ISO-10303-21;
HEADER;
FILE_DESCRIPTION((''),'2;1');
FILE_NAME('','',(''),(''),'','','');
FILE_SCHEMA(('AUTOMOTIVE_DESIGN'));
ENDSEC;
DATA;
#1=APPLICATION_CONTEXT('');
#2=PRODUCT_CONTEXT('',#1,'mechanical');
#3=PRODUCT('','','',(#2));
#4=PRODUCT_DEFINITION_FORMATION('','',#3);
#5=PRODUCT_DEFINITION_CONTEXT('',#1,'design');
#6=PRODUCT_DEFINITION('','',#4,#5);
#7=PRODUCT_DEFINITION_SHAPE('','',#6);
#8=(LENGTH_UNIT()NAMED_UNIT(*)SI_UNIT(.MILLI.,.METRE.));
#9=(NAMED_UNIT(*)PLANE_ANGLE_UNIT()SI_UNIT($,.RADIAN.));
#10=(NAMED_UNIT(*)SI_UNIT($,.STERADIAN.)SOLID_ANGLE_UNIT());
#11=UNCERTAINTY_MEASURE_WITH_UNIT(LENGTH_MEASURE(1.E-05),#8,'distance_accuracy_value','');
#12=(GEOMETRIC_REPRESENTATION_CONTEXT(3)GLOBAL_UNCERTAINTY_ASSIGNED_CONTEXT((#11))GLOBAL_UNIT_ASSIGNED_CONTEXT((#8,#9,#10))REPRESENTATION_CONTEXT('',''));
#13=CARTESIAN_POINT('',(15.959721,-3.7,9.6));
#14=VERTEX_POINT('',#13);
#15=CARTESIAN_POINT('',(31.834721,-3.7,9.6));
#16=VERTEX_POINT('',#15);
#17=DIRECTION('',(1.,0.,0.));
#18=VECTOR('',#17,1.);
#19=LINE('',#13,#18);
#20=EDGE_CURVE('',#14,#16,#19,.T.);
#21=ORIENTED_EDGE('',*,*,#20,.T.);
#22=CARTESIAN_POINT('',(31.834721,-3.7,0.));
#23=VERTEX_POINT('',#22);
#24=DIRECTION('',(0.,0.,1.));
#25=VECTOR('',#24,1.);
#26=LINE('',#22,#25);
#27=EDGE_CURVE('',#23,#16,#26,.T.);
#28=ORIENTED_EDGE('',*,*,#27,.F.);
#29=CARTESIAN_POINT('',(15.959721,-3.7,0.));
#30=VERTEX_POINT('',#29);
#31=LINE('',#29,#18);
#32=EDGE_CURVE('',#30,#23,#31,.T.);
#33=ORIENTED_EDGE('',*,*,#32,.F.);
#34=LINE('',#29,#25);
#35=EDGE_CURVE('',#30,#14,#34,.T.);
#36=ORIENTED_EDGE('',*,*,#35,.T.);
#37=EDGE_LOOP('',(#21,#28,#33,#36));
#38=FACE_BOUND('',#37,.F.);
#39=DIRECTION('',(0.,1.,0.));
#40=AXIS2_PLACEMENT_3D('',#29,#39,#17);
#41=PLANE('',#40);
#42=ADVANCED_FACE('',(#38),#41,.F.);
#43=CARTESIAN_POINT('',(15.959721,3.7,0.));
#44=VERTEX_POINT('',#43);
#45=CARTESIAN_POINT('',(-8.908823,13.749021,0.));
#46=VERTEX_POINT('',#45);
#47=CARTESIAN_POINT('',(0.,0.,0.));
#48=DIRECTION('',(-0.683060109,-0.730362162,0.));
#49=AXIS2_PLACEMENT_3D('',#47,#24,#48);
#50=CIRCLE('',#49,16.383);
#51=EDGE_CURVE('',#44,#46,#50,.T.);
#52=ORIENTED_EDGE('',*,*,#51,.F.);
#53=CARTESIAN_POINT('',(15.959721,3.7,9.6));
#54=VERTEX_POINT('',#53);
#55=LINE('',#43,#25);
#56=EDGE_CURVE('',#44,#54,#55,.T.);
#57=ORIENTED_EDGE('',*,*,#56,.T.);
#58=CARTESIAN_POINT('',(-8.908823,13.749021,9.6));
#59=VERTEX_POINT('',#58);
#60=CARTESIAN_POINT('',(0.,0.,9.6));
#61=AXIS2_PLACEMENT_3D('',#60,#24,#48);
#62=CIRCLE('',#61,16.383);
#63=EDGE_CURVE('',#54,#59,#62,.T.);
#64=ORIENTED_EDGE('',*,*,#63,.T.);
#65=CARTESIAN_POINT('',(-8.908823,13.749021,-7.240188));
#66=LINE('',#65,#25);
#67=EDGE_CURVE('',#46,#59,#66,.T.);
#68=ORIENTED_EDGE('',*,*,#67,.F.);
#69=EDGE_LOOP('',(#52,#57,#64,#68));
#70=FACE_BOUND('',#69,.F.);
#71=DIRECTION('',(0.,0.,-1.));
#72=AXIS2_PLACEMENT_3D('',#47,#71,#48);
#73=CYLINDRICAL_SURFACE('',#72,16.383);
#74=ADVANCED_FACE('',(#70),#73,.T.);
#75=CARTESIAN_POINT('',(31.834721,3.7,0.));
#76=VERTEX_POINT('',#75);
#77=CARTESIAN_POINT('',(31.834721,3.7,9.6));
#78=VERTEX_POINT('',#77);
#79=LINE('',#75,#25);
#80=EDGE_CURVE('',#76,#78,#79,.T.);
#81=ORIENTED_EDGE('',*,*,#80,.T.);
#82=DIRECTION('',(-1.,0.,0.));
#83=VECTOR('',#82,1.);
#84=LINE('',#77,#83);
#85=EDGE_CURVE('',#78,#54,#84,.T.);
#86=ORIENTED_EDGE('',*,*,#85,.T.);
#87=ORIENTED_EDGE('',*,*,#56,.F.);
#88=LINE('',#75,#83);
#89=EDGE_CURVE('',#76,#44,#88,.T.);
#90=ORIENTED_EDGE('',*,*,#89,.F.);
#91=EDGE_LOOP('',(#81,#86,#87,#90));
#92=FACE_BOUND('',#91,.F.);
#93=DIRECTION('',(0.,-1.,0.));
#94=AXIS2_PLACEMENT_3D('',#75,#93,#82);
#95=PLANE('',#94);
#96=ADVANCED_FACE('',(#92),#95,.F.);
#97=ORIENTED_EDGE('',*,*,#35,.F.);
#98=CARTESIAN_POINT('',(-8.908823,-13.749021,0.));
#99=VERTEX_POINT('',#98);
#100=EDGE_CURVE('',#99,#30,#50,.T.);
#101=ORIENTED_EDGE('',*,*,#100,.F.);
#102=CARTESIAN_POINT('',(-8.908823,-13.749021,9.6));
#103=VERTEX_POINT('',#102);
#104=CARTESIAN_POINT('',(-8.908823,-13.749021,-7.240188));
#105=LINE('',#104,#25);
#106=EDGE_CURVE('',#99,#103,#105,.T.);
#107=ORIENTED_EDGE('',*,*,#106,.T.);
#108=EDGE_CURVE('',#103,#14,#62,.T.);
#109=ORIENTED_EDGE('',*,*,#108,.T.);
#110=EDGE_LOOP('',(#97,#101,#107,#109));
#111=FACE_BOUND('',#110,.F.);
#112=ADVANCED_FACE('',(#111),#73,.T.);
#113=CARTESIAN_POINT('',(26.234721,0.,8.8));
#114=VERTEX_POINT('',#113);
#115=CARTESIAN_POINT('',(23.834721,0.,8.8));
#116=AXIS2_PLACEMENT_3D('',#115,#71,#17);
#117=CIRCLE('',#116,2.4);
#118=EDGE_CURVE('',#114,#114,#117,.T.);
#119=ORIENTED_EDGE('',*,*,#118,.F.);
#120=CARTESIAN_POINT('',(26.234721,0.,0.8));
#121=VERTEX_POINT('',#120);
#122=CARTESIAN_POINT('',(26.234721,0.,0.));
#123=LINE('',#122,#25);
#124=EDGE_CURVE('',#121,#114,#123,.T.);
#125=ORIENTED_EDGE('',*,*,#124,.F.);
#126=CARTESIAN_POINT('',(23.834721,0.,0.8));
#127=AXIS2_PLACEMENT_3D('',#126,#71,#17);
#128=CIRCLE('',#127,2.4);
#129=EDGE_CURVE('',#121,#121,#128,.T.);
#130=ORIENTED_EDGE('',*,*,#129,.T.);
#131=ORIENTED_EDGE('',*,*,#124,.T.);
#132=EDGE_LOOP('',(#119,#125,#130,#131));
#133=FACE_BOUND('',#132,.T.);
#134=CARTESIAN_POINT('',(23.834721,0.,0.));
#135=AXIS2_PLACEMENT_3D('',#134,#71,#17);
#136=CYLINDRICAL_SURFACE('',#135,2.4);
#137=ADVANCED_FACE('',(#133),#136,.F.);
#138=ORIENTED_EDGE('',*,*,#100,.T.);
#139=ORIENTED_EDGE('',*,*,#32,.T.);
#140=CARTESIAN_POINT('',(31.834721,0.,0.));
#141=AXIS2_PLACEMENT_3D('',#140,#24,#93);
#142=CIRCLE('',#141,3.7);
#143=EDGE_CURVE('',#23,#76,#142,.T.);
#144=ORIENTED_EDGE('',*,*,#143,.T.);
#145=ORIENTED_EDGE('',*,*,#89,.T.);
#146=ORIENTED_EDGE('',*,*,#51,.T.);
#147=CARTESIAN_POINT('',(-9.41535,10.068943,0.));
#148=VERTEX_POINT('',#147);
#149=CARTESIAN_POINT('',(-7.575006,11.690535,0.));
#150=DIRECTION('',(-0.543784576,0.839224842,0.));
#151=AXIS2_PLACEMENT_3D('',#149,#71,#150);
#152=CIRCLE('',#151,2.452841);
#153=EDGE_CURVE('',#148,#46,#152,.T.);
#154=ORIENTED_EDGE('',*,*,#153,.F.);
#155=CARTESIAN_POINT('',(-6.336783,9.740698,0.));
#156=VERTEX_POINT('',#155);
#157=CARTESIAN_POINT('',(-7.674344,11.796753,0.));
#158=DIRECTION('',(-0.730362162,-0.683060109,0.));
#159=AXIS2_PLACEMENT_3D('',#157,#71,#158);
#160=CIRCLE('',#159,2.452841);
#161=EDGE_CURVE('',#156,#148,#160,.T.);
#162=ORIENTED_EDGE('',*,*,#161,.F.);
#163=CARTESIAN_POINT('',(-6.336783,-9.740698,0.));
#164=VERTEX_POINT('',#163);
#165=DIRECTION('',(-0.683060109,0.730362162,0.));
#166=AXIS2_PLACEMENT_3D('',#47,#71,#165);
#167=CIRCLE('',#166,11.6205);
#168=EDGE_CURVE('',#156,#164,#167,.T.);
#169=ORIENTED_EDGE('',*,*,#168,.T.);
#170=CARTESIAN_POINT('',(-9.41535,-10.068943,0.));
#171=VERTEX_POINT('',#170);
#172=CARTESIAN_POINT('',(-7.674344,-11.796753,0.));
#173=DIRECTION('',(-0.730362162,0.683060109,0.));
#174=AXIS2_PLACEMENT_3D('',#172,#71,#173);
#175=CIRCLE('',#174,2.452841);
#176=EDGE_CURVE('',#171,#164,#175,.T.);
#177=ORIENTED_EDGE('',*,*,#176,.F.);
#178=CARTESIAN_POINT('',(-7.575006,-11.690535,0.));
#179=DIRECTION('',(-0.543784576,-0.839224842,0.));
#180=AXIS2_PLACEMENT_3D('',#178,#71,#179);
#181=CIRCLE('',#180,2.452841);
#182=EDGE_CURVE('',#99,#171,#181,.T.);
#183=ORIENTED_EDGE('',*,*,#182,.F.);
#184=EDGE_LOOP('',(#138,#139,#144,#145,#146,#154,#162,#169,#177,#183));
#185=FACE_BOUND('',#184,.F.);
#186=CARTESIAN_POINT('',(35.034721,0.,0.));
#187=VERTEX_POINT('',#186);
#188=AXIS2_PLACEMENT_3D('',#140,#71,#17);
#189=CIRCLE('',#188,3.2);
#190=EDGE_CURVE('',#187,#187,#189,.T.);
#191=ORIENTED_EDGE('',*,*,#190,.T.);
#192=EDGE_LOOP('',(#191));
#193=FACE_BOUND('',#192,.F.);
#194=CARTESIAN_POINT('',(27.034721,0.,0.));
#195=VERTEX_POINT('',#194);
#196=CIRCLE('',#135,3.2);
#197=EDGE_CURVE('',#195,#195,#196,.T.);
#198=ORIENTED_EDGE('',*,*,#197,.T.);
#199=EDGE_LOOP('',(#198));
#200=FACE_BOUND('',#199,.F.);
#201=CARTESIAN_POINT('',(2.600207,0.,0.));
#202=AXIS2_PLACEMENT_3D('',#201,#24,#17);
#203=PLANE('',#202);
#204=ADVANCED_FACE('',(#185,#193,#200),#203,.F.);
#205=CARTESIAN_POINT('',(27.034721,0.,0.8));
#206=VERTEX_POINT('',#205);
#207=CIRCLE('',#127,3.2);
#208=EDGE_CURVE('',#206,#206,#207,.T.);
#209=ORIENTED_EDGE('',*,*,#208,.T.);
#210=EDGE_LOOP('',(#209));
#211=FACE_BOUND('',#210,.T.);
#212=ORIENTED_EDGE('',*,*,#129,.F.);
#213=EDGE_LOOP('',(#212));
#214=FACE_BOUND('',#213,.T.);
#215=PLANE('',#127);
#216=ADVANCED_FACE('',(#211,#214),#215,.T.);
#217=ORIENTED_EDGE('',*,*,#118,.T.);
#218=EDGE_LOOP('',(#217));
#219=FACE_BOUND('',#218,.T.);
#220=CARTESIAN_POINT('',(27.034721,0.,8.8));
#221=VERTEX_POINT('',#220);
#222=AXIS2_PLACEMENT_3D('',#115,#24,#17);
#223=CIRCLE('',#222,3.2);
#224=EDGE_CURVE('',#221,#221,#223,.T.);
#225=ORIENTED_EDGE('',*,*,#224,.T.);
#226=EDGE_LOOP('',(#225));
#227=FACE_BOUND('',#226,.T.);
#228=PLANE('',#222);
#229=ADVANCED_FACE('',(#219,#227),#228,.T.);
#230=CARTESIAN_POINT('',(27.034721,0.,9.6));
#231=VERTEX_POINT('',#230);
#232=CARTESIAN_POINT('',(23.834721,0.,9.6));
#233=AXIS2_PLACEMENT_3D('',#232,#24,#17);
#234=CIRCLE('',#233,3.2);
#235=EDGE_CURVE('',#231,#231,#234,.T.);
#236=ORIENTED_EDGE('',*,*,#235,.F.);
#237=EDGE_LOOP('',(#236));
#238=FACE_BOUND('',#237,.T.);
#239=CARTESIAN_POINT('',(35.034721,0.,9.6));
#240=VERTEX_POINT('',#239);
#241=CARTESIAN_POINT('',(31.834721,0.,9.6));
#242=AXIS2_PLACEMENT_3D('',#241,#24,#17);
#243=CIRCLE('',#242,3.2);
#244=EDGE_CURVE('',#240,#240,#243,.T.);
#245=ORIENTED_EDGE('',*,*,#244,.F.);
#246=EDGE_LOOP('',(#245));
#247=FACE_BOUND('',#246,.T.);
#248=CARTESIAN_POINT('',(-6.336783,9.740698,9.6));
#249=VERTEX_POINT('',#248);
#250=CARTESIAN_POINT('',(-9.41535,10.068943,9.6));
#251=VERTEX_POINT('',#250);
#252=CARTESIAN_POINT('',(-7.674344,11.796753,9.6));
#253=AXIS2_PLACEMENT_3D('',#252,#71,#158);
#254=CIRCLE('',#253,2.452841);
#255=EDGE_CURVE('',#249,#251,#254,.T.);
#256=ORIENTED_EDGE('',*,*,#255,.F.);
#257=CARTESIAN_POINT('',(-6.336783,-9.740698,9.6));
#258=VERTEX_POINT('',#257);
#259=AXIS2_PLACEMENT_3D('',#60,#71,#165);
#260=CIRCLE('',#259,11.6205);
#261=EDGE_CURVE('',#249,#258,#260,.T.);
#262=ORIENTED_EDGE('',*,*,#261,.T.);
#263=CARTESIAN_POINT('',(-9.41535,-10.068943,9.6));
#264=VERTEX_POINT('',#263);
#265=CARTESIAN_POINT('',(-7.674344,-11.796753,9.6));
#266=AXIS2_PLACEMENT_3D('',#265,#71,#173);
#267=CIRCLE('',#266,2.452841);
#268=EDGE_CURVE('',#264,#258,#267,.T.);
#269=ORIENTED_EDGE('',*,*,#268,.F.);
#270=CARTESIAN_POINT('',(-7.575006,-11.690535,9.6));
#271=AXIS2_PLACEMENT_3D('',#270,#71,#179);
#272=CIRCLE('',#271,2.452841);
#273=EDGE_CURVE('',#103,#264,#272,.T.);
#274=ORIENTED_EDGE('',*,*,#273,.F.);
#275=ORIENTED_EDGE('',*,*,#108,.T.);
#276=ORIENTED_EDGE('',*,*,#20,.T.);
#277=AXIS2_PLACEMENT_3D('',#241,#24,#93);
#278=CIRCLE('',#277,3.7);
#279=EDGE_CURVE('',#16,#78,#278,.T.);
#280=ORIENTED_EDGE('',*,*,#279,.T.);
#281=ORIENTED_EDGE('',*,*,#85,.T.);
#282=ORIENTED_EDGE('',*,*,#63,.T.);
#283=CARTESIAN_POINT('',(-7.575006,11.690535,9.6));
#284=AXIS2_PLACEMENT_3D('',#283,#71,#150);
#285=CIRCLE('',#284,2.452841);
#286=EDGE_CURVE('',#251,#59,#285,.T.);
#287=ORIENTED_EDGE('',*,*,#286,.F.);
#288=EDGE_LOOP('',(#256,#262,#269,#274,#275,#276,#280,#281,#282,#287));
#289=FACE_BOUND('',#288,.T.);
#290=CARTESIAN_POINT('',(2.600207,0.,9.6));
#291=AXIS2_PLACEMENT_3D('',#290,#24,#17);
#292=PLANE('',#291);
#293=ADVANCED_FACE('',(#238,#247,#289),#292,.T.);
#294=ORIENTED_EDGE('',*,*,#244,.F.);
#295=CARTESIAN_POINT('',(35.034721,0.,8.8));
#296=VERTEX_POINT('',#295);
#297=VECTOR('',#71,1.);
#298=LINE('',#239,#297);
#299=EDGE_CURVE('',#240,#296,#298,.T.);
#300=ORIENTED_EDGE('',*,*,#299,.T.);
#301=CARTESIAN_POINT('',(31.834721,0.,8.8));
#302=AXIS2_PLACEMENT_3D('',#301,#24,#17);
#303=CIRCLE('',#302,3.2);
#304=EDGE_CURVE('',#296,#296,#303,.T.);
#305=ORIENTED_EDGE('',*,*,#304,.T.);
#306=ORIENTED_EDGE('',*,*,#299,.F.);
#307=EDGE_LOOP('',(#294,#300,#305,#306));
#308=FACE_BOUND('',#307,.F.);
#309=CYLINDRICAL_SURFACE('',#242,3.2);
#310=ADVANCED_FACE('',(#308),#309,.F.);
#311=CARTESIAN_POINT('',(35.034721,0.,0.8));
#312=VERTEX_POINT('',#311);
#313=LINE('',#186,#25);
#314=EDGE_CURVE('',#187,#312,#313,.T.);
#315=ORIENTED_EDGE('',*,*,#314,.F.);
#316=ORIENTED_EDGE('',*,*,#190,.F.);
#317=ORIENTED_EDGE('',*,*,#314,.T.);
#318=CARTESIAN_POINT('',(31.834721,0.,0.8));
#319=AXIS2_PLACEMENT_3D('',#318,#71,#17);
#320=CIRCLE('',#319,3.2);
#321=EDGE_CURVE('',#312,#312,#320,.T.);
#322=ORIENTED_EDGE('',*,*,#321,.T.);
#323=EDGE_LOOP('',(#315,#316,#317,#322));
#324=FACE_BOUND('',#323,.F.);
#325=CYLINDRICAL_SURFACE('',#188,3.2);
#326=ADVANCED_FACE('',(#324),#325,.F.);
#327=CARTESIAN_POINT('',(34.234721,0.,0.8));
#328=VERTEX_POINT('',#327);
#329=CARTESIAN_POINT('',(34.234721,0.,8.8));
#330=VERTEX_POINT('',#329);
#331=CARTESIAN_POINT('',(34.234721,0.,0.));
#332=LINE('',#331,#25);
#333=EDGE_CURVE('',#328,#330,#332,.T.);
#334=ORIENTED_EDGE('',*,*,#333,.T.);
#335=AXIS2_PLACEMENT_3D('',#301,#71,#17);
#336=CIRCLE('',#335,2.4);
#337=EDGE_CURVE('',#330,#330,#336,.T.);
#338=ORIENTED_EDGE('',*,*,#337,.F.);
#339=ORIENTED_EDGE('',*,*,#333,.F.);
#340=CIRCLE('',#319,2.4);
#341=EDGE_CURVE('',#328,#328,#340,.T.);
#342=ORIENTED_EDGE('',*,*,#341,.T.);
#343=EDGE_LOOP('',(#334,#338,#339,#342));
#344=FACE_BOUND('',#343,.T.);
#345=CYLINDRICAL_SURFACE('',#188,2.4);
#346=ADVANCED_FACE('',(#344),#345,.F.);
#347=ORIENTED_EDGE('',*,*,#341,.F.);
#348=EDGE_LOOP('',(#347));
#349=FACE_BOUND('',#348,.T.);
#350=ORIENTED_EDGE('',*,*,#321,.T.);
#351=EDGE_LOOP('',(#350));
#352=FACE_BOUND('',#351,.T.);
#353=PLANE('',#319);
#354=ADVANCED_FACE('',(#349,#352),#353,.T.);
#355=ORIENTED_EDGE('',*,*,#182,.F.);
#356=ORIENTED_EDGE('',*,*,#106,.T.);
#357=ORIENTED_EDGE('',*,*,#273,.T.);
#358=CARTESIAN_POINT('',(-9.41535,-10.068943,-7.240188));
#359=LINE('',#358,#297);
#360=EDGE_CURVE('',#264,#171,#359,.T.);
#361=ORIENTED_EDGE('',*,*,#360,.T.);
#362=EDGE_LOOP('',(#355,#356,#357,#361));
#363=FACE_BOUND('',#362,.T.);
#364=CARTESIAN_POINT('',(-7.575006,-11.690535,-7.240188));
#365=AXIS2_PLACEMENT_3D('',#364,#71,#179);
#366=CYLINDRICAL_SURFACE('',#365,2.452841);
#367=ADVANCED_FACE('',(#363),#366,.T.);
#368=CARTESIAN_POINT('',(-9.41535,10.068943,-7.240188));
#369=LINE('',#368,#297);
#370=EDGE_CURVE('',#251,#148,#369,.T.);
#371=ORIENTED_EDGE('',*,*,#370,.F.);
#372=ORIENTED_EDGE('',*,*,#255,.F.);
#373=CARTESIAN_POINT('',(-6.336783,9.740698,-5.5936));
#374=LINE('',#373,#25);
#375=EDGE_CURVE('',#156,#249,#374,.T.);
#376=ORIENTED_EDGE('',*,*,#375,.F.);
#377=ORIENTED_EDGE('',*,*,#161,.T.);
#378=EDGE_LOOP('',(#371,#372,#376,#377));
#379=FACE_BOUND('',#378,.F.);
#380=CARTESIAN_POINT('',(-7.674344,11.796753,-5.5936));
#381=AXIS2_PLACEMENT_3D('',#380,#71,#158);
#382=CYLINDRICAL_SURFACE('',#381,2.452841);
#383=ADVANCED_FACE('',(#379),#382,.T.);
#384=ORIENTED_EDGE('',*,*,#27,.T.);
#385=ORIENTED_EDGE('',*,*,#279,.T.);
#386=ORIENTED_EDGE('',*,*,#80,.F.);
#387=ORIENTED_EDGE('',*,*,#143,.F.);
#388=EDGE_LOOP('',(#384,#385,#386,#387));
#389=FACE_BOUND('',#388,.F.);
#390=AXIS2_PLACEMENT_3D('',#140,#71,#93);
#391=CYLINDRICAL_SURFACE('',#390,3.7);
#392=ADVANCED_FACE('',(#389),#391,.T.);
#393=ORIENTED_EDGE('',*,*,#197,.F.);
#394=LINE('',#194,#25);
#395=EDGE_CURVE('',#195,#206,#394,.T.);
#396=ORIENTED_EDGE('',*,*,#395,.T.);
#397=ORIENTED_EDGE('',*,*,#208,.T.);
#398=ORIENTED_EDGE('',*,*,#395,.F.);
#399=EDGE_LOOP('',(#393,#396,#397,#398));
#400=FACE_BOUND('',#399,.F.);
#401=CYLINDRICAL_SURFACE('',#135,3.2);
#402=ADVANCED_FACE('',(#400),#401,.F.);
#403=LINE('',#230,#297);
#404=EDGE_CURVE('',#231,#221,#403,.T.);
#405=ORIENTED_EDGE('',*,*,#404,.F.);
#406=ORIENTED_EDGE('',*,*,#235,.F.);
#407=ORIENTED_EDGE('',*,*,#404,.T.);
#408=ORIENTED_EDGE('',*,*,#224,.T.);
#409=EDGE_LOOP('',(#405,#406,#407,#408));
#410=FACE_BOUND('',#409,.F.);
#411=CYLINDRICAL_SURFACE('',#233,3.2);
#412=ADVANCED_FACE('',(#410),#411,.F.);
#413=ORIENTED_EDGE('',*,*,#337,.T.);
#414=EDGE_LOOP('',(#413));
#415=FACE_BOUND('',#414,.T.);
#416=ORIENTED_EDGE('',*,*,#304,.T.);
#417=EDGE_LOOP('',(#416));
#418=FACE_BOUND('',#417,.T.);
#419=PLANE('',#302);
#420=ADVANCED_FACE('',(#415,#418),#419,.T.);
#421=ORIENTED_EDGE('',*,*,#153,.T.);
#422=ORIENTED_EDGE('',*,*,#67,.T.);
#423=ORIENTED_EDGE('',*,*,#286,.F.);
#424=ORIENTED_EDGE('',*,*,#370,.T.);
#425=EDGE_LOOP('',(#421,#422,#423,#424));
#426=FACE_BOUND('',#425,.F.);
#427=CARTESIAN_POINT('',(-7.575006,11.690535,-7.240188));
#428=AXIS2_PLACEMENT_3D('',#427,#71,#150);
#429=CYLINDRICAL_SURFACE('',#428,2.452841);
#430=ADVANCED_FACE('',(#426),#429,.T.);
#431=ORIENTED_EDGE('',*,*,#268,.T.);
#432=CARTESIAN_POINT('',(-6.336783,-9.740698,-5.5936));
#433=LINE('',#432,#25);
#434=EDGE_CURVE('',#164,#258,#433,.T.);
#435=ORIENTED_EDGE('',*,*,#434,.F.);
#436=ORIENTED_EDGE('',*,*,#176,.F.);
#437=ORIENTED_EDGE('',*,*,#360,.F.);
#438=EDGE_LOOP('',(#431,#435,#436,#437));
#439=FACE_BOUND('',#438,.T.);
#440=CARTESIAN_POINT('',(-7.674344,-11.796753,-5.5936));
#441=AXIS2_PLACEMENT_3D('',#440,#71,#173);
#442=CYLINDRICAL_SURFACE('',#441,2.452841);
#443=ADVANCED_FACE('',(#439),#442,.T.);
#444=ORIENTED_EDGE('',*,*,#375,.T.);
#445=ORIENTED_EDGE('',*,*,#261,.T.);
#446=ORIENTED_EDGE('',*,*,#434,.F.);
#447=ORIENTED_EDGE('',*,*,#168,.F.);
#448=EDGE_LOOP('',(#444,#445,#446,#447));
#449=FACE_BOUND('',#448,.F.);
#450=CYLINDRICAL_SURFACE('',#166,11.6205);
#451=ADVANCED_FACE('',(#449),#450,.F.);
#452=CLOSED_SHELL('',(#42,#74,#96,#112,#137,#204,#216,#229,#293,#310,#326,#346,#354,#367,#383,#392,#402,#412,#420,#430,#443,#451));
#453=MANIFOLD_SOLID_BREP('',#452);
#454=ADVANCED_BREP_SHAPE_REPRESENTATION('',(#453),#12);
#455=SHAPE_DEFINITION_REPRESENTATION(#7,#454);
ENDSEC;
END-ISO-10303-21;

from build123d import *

# Parameters (mm, degrees)
F1_DEPTH    = 9.6
F2_R        = 2.4
F3_DEPTH    = 9.6
F4_T1_DEPTH = 24.0803750693
F4_T3_DEPTH = 20.787199352
F5_R        = 3.2
F6_DEPTH    = 0.8
F7_R        = 3.2
F8_DEPTH    = 0.8


# Not quite as in the source:
# - a fillet or chamfer that OpenCascade refuses, or shapes differently, is made with other operations: its cross-section is extruded or revolved along the edge and cut away or added


with BuildPart() as f1:
    # F0 (on Top) → F1 (new body)
    with BuildSketch(Plane.XY):
        with BuildLine():
            Line((-11.1905737705, 11.9655232935), (-7.9375, 8.4871734989))
            ThreePointArc((-7.9375, 8.4871734989), (11.6205, 0), (-7.9375, -8.4871734989))
            Line((-7.9375, -8.4871734989), (-11.1905737705, -11.9655232935))
            ThreePointArc((-11.1905737705, -11.9655232935), (16.383, 0), (-11.1905737705, 11.9655232935))
        make_face()
    extrude(amount=F1_DEPTH)

    # F2 (on Top) → F3 (join, through all)
    with BuildSketch(Plane.XY):
        with BuildLine():
            Line((31.8347208309, 3.7), (15.9597208309, 3.7))
            ThreePointArc((15.9597208309, 3.7), (16.383, 0), (15.9597208309, -3.7))
            Line((15.9597208309, -3.7), (31.8347208309, -3.7))
            ThreePointArc((31.8347208309, -3.7), (35.5347208309, 0), (31.8347208309, 3.7))
        make_face()
        with Locations((23.8347208309, 0)):
            Circle(F2_R, mode=Mode.SUBTRACT)
        with Locations((31.8347208309, 0)):
            Circle(F2_R, mode=Mode.SUBTRACT)
    extrude(amount=F3_DEPTH)

    # F4: fillet of radius 2.4528409794 on 4 edges, made by hand

    # F4_s2 → F4_t1 (cut)
    with BuildSketch(Plane.XY.offset(-7.2401875346)):
        with BuildLine():
            ThreePointArc((-8.9088227084, 13.7490205815), (-10.0096283387, 11.9889330027), (-9.3664678562, 10.0150976715))
            Line((-9.3664678562, 10.0150976715), (-11.1905737705, 11.9655232935))
            ThreePointArc((-11.1905737705, 11.9655232935), (-10.0891848208, 12.9077898438), (-8.9088227084, 13.7490205815))
        make_face()
        with BuildLine():
            ThreePointArc((-8.9088227084, -13.7490205815), (-10.0096283387, -11.9889330027), (-9.3664678562, -10.0150976715))
            Line((-9.3664678562, -10.0150976715), (-11.1905737705, -11.9655232935))
            ThreePointArc((-11.1905737705, -11.9655232935), (-10.0891848208, -12.9077898438), (-8.9088227084, -13.7490205815))
        make_face()
    extrude(amount=F4_T1_DEPTH, mode=Mode.SUBTRACT)

    # F4_s4 → F4_t3 (cut)
    with BuildSketch(Plane.XY.offset(-5.593599676)):
        with BuildLine():
            ThreePointArc((-9.4658059224, 10.1213149191), (-7.9705260578, 9.3618595516), (-6.3367832056, 9.7406980682))
            ThreePointArc((-6.3367832056, 9.7406980682), (-7.164608937, 9.1490108225), (-7.9375, 8.4871734989))
            Line((-7.9375, 8.4871734989), (-9.4658059224, 10.1213149191))
        make_face()
        with BuildLine():
            ThreePointArc((-9.4658059224, -10.1213149191), (-7.9705260578, -9.3618595516), (-6.3367832056, -9.7406980682))
            ThreePointArc((-6.3367832056, -9.7406980682), (-7.164608937, -9.1490108225), (-7.9375, -8.4871734989))
            Line((-7.9375, -8.4871734989), (-9.4658059224, -10.1213149191))
        make_face()
    extrude(amount=F4_T3_DEPTH, mode=Mode.SUBTRACT)

    # F5 (on face) → F6 (cut)
    with BuildSketch(Plane.XY.offset(9.6)):
        with Locations((23.8347208309, 0)):
            Circle(F5_R)
        with Locations((31.8347208309, 0)):
            Circle(F5_R)
    extrude(amount=-F6_DEPTH, mode=Mode.SUBTRACT)

    # F7 (on face) → F8 (cut)
    with BuildSketch(Plane(origin=(0, 0, 0), x_dir=(1, 0, 0), z_dir=(0, 0, -1))):
        with Locations((23.8347208309, 0)):
            Circle(F7_R)
        with Locations((31.8347208309, 0)):
            Circle(F7_R)
    extrude(amount=-F8_DEPTH, mode=Mode.SUBTRACT)


solid = f1.part
